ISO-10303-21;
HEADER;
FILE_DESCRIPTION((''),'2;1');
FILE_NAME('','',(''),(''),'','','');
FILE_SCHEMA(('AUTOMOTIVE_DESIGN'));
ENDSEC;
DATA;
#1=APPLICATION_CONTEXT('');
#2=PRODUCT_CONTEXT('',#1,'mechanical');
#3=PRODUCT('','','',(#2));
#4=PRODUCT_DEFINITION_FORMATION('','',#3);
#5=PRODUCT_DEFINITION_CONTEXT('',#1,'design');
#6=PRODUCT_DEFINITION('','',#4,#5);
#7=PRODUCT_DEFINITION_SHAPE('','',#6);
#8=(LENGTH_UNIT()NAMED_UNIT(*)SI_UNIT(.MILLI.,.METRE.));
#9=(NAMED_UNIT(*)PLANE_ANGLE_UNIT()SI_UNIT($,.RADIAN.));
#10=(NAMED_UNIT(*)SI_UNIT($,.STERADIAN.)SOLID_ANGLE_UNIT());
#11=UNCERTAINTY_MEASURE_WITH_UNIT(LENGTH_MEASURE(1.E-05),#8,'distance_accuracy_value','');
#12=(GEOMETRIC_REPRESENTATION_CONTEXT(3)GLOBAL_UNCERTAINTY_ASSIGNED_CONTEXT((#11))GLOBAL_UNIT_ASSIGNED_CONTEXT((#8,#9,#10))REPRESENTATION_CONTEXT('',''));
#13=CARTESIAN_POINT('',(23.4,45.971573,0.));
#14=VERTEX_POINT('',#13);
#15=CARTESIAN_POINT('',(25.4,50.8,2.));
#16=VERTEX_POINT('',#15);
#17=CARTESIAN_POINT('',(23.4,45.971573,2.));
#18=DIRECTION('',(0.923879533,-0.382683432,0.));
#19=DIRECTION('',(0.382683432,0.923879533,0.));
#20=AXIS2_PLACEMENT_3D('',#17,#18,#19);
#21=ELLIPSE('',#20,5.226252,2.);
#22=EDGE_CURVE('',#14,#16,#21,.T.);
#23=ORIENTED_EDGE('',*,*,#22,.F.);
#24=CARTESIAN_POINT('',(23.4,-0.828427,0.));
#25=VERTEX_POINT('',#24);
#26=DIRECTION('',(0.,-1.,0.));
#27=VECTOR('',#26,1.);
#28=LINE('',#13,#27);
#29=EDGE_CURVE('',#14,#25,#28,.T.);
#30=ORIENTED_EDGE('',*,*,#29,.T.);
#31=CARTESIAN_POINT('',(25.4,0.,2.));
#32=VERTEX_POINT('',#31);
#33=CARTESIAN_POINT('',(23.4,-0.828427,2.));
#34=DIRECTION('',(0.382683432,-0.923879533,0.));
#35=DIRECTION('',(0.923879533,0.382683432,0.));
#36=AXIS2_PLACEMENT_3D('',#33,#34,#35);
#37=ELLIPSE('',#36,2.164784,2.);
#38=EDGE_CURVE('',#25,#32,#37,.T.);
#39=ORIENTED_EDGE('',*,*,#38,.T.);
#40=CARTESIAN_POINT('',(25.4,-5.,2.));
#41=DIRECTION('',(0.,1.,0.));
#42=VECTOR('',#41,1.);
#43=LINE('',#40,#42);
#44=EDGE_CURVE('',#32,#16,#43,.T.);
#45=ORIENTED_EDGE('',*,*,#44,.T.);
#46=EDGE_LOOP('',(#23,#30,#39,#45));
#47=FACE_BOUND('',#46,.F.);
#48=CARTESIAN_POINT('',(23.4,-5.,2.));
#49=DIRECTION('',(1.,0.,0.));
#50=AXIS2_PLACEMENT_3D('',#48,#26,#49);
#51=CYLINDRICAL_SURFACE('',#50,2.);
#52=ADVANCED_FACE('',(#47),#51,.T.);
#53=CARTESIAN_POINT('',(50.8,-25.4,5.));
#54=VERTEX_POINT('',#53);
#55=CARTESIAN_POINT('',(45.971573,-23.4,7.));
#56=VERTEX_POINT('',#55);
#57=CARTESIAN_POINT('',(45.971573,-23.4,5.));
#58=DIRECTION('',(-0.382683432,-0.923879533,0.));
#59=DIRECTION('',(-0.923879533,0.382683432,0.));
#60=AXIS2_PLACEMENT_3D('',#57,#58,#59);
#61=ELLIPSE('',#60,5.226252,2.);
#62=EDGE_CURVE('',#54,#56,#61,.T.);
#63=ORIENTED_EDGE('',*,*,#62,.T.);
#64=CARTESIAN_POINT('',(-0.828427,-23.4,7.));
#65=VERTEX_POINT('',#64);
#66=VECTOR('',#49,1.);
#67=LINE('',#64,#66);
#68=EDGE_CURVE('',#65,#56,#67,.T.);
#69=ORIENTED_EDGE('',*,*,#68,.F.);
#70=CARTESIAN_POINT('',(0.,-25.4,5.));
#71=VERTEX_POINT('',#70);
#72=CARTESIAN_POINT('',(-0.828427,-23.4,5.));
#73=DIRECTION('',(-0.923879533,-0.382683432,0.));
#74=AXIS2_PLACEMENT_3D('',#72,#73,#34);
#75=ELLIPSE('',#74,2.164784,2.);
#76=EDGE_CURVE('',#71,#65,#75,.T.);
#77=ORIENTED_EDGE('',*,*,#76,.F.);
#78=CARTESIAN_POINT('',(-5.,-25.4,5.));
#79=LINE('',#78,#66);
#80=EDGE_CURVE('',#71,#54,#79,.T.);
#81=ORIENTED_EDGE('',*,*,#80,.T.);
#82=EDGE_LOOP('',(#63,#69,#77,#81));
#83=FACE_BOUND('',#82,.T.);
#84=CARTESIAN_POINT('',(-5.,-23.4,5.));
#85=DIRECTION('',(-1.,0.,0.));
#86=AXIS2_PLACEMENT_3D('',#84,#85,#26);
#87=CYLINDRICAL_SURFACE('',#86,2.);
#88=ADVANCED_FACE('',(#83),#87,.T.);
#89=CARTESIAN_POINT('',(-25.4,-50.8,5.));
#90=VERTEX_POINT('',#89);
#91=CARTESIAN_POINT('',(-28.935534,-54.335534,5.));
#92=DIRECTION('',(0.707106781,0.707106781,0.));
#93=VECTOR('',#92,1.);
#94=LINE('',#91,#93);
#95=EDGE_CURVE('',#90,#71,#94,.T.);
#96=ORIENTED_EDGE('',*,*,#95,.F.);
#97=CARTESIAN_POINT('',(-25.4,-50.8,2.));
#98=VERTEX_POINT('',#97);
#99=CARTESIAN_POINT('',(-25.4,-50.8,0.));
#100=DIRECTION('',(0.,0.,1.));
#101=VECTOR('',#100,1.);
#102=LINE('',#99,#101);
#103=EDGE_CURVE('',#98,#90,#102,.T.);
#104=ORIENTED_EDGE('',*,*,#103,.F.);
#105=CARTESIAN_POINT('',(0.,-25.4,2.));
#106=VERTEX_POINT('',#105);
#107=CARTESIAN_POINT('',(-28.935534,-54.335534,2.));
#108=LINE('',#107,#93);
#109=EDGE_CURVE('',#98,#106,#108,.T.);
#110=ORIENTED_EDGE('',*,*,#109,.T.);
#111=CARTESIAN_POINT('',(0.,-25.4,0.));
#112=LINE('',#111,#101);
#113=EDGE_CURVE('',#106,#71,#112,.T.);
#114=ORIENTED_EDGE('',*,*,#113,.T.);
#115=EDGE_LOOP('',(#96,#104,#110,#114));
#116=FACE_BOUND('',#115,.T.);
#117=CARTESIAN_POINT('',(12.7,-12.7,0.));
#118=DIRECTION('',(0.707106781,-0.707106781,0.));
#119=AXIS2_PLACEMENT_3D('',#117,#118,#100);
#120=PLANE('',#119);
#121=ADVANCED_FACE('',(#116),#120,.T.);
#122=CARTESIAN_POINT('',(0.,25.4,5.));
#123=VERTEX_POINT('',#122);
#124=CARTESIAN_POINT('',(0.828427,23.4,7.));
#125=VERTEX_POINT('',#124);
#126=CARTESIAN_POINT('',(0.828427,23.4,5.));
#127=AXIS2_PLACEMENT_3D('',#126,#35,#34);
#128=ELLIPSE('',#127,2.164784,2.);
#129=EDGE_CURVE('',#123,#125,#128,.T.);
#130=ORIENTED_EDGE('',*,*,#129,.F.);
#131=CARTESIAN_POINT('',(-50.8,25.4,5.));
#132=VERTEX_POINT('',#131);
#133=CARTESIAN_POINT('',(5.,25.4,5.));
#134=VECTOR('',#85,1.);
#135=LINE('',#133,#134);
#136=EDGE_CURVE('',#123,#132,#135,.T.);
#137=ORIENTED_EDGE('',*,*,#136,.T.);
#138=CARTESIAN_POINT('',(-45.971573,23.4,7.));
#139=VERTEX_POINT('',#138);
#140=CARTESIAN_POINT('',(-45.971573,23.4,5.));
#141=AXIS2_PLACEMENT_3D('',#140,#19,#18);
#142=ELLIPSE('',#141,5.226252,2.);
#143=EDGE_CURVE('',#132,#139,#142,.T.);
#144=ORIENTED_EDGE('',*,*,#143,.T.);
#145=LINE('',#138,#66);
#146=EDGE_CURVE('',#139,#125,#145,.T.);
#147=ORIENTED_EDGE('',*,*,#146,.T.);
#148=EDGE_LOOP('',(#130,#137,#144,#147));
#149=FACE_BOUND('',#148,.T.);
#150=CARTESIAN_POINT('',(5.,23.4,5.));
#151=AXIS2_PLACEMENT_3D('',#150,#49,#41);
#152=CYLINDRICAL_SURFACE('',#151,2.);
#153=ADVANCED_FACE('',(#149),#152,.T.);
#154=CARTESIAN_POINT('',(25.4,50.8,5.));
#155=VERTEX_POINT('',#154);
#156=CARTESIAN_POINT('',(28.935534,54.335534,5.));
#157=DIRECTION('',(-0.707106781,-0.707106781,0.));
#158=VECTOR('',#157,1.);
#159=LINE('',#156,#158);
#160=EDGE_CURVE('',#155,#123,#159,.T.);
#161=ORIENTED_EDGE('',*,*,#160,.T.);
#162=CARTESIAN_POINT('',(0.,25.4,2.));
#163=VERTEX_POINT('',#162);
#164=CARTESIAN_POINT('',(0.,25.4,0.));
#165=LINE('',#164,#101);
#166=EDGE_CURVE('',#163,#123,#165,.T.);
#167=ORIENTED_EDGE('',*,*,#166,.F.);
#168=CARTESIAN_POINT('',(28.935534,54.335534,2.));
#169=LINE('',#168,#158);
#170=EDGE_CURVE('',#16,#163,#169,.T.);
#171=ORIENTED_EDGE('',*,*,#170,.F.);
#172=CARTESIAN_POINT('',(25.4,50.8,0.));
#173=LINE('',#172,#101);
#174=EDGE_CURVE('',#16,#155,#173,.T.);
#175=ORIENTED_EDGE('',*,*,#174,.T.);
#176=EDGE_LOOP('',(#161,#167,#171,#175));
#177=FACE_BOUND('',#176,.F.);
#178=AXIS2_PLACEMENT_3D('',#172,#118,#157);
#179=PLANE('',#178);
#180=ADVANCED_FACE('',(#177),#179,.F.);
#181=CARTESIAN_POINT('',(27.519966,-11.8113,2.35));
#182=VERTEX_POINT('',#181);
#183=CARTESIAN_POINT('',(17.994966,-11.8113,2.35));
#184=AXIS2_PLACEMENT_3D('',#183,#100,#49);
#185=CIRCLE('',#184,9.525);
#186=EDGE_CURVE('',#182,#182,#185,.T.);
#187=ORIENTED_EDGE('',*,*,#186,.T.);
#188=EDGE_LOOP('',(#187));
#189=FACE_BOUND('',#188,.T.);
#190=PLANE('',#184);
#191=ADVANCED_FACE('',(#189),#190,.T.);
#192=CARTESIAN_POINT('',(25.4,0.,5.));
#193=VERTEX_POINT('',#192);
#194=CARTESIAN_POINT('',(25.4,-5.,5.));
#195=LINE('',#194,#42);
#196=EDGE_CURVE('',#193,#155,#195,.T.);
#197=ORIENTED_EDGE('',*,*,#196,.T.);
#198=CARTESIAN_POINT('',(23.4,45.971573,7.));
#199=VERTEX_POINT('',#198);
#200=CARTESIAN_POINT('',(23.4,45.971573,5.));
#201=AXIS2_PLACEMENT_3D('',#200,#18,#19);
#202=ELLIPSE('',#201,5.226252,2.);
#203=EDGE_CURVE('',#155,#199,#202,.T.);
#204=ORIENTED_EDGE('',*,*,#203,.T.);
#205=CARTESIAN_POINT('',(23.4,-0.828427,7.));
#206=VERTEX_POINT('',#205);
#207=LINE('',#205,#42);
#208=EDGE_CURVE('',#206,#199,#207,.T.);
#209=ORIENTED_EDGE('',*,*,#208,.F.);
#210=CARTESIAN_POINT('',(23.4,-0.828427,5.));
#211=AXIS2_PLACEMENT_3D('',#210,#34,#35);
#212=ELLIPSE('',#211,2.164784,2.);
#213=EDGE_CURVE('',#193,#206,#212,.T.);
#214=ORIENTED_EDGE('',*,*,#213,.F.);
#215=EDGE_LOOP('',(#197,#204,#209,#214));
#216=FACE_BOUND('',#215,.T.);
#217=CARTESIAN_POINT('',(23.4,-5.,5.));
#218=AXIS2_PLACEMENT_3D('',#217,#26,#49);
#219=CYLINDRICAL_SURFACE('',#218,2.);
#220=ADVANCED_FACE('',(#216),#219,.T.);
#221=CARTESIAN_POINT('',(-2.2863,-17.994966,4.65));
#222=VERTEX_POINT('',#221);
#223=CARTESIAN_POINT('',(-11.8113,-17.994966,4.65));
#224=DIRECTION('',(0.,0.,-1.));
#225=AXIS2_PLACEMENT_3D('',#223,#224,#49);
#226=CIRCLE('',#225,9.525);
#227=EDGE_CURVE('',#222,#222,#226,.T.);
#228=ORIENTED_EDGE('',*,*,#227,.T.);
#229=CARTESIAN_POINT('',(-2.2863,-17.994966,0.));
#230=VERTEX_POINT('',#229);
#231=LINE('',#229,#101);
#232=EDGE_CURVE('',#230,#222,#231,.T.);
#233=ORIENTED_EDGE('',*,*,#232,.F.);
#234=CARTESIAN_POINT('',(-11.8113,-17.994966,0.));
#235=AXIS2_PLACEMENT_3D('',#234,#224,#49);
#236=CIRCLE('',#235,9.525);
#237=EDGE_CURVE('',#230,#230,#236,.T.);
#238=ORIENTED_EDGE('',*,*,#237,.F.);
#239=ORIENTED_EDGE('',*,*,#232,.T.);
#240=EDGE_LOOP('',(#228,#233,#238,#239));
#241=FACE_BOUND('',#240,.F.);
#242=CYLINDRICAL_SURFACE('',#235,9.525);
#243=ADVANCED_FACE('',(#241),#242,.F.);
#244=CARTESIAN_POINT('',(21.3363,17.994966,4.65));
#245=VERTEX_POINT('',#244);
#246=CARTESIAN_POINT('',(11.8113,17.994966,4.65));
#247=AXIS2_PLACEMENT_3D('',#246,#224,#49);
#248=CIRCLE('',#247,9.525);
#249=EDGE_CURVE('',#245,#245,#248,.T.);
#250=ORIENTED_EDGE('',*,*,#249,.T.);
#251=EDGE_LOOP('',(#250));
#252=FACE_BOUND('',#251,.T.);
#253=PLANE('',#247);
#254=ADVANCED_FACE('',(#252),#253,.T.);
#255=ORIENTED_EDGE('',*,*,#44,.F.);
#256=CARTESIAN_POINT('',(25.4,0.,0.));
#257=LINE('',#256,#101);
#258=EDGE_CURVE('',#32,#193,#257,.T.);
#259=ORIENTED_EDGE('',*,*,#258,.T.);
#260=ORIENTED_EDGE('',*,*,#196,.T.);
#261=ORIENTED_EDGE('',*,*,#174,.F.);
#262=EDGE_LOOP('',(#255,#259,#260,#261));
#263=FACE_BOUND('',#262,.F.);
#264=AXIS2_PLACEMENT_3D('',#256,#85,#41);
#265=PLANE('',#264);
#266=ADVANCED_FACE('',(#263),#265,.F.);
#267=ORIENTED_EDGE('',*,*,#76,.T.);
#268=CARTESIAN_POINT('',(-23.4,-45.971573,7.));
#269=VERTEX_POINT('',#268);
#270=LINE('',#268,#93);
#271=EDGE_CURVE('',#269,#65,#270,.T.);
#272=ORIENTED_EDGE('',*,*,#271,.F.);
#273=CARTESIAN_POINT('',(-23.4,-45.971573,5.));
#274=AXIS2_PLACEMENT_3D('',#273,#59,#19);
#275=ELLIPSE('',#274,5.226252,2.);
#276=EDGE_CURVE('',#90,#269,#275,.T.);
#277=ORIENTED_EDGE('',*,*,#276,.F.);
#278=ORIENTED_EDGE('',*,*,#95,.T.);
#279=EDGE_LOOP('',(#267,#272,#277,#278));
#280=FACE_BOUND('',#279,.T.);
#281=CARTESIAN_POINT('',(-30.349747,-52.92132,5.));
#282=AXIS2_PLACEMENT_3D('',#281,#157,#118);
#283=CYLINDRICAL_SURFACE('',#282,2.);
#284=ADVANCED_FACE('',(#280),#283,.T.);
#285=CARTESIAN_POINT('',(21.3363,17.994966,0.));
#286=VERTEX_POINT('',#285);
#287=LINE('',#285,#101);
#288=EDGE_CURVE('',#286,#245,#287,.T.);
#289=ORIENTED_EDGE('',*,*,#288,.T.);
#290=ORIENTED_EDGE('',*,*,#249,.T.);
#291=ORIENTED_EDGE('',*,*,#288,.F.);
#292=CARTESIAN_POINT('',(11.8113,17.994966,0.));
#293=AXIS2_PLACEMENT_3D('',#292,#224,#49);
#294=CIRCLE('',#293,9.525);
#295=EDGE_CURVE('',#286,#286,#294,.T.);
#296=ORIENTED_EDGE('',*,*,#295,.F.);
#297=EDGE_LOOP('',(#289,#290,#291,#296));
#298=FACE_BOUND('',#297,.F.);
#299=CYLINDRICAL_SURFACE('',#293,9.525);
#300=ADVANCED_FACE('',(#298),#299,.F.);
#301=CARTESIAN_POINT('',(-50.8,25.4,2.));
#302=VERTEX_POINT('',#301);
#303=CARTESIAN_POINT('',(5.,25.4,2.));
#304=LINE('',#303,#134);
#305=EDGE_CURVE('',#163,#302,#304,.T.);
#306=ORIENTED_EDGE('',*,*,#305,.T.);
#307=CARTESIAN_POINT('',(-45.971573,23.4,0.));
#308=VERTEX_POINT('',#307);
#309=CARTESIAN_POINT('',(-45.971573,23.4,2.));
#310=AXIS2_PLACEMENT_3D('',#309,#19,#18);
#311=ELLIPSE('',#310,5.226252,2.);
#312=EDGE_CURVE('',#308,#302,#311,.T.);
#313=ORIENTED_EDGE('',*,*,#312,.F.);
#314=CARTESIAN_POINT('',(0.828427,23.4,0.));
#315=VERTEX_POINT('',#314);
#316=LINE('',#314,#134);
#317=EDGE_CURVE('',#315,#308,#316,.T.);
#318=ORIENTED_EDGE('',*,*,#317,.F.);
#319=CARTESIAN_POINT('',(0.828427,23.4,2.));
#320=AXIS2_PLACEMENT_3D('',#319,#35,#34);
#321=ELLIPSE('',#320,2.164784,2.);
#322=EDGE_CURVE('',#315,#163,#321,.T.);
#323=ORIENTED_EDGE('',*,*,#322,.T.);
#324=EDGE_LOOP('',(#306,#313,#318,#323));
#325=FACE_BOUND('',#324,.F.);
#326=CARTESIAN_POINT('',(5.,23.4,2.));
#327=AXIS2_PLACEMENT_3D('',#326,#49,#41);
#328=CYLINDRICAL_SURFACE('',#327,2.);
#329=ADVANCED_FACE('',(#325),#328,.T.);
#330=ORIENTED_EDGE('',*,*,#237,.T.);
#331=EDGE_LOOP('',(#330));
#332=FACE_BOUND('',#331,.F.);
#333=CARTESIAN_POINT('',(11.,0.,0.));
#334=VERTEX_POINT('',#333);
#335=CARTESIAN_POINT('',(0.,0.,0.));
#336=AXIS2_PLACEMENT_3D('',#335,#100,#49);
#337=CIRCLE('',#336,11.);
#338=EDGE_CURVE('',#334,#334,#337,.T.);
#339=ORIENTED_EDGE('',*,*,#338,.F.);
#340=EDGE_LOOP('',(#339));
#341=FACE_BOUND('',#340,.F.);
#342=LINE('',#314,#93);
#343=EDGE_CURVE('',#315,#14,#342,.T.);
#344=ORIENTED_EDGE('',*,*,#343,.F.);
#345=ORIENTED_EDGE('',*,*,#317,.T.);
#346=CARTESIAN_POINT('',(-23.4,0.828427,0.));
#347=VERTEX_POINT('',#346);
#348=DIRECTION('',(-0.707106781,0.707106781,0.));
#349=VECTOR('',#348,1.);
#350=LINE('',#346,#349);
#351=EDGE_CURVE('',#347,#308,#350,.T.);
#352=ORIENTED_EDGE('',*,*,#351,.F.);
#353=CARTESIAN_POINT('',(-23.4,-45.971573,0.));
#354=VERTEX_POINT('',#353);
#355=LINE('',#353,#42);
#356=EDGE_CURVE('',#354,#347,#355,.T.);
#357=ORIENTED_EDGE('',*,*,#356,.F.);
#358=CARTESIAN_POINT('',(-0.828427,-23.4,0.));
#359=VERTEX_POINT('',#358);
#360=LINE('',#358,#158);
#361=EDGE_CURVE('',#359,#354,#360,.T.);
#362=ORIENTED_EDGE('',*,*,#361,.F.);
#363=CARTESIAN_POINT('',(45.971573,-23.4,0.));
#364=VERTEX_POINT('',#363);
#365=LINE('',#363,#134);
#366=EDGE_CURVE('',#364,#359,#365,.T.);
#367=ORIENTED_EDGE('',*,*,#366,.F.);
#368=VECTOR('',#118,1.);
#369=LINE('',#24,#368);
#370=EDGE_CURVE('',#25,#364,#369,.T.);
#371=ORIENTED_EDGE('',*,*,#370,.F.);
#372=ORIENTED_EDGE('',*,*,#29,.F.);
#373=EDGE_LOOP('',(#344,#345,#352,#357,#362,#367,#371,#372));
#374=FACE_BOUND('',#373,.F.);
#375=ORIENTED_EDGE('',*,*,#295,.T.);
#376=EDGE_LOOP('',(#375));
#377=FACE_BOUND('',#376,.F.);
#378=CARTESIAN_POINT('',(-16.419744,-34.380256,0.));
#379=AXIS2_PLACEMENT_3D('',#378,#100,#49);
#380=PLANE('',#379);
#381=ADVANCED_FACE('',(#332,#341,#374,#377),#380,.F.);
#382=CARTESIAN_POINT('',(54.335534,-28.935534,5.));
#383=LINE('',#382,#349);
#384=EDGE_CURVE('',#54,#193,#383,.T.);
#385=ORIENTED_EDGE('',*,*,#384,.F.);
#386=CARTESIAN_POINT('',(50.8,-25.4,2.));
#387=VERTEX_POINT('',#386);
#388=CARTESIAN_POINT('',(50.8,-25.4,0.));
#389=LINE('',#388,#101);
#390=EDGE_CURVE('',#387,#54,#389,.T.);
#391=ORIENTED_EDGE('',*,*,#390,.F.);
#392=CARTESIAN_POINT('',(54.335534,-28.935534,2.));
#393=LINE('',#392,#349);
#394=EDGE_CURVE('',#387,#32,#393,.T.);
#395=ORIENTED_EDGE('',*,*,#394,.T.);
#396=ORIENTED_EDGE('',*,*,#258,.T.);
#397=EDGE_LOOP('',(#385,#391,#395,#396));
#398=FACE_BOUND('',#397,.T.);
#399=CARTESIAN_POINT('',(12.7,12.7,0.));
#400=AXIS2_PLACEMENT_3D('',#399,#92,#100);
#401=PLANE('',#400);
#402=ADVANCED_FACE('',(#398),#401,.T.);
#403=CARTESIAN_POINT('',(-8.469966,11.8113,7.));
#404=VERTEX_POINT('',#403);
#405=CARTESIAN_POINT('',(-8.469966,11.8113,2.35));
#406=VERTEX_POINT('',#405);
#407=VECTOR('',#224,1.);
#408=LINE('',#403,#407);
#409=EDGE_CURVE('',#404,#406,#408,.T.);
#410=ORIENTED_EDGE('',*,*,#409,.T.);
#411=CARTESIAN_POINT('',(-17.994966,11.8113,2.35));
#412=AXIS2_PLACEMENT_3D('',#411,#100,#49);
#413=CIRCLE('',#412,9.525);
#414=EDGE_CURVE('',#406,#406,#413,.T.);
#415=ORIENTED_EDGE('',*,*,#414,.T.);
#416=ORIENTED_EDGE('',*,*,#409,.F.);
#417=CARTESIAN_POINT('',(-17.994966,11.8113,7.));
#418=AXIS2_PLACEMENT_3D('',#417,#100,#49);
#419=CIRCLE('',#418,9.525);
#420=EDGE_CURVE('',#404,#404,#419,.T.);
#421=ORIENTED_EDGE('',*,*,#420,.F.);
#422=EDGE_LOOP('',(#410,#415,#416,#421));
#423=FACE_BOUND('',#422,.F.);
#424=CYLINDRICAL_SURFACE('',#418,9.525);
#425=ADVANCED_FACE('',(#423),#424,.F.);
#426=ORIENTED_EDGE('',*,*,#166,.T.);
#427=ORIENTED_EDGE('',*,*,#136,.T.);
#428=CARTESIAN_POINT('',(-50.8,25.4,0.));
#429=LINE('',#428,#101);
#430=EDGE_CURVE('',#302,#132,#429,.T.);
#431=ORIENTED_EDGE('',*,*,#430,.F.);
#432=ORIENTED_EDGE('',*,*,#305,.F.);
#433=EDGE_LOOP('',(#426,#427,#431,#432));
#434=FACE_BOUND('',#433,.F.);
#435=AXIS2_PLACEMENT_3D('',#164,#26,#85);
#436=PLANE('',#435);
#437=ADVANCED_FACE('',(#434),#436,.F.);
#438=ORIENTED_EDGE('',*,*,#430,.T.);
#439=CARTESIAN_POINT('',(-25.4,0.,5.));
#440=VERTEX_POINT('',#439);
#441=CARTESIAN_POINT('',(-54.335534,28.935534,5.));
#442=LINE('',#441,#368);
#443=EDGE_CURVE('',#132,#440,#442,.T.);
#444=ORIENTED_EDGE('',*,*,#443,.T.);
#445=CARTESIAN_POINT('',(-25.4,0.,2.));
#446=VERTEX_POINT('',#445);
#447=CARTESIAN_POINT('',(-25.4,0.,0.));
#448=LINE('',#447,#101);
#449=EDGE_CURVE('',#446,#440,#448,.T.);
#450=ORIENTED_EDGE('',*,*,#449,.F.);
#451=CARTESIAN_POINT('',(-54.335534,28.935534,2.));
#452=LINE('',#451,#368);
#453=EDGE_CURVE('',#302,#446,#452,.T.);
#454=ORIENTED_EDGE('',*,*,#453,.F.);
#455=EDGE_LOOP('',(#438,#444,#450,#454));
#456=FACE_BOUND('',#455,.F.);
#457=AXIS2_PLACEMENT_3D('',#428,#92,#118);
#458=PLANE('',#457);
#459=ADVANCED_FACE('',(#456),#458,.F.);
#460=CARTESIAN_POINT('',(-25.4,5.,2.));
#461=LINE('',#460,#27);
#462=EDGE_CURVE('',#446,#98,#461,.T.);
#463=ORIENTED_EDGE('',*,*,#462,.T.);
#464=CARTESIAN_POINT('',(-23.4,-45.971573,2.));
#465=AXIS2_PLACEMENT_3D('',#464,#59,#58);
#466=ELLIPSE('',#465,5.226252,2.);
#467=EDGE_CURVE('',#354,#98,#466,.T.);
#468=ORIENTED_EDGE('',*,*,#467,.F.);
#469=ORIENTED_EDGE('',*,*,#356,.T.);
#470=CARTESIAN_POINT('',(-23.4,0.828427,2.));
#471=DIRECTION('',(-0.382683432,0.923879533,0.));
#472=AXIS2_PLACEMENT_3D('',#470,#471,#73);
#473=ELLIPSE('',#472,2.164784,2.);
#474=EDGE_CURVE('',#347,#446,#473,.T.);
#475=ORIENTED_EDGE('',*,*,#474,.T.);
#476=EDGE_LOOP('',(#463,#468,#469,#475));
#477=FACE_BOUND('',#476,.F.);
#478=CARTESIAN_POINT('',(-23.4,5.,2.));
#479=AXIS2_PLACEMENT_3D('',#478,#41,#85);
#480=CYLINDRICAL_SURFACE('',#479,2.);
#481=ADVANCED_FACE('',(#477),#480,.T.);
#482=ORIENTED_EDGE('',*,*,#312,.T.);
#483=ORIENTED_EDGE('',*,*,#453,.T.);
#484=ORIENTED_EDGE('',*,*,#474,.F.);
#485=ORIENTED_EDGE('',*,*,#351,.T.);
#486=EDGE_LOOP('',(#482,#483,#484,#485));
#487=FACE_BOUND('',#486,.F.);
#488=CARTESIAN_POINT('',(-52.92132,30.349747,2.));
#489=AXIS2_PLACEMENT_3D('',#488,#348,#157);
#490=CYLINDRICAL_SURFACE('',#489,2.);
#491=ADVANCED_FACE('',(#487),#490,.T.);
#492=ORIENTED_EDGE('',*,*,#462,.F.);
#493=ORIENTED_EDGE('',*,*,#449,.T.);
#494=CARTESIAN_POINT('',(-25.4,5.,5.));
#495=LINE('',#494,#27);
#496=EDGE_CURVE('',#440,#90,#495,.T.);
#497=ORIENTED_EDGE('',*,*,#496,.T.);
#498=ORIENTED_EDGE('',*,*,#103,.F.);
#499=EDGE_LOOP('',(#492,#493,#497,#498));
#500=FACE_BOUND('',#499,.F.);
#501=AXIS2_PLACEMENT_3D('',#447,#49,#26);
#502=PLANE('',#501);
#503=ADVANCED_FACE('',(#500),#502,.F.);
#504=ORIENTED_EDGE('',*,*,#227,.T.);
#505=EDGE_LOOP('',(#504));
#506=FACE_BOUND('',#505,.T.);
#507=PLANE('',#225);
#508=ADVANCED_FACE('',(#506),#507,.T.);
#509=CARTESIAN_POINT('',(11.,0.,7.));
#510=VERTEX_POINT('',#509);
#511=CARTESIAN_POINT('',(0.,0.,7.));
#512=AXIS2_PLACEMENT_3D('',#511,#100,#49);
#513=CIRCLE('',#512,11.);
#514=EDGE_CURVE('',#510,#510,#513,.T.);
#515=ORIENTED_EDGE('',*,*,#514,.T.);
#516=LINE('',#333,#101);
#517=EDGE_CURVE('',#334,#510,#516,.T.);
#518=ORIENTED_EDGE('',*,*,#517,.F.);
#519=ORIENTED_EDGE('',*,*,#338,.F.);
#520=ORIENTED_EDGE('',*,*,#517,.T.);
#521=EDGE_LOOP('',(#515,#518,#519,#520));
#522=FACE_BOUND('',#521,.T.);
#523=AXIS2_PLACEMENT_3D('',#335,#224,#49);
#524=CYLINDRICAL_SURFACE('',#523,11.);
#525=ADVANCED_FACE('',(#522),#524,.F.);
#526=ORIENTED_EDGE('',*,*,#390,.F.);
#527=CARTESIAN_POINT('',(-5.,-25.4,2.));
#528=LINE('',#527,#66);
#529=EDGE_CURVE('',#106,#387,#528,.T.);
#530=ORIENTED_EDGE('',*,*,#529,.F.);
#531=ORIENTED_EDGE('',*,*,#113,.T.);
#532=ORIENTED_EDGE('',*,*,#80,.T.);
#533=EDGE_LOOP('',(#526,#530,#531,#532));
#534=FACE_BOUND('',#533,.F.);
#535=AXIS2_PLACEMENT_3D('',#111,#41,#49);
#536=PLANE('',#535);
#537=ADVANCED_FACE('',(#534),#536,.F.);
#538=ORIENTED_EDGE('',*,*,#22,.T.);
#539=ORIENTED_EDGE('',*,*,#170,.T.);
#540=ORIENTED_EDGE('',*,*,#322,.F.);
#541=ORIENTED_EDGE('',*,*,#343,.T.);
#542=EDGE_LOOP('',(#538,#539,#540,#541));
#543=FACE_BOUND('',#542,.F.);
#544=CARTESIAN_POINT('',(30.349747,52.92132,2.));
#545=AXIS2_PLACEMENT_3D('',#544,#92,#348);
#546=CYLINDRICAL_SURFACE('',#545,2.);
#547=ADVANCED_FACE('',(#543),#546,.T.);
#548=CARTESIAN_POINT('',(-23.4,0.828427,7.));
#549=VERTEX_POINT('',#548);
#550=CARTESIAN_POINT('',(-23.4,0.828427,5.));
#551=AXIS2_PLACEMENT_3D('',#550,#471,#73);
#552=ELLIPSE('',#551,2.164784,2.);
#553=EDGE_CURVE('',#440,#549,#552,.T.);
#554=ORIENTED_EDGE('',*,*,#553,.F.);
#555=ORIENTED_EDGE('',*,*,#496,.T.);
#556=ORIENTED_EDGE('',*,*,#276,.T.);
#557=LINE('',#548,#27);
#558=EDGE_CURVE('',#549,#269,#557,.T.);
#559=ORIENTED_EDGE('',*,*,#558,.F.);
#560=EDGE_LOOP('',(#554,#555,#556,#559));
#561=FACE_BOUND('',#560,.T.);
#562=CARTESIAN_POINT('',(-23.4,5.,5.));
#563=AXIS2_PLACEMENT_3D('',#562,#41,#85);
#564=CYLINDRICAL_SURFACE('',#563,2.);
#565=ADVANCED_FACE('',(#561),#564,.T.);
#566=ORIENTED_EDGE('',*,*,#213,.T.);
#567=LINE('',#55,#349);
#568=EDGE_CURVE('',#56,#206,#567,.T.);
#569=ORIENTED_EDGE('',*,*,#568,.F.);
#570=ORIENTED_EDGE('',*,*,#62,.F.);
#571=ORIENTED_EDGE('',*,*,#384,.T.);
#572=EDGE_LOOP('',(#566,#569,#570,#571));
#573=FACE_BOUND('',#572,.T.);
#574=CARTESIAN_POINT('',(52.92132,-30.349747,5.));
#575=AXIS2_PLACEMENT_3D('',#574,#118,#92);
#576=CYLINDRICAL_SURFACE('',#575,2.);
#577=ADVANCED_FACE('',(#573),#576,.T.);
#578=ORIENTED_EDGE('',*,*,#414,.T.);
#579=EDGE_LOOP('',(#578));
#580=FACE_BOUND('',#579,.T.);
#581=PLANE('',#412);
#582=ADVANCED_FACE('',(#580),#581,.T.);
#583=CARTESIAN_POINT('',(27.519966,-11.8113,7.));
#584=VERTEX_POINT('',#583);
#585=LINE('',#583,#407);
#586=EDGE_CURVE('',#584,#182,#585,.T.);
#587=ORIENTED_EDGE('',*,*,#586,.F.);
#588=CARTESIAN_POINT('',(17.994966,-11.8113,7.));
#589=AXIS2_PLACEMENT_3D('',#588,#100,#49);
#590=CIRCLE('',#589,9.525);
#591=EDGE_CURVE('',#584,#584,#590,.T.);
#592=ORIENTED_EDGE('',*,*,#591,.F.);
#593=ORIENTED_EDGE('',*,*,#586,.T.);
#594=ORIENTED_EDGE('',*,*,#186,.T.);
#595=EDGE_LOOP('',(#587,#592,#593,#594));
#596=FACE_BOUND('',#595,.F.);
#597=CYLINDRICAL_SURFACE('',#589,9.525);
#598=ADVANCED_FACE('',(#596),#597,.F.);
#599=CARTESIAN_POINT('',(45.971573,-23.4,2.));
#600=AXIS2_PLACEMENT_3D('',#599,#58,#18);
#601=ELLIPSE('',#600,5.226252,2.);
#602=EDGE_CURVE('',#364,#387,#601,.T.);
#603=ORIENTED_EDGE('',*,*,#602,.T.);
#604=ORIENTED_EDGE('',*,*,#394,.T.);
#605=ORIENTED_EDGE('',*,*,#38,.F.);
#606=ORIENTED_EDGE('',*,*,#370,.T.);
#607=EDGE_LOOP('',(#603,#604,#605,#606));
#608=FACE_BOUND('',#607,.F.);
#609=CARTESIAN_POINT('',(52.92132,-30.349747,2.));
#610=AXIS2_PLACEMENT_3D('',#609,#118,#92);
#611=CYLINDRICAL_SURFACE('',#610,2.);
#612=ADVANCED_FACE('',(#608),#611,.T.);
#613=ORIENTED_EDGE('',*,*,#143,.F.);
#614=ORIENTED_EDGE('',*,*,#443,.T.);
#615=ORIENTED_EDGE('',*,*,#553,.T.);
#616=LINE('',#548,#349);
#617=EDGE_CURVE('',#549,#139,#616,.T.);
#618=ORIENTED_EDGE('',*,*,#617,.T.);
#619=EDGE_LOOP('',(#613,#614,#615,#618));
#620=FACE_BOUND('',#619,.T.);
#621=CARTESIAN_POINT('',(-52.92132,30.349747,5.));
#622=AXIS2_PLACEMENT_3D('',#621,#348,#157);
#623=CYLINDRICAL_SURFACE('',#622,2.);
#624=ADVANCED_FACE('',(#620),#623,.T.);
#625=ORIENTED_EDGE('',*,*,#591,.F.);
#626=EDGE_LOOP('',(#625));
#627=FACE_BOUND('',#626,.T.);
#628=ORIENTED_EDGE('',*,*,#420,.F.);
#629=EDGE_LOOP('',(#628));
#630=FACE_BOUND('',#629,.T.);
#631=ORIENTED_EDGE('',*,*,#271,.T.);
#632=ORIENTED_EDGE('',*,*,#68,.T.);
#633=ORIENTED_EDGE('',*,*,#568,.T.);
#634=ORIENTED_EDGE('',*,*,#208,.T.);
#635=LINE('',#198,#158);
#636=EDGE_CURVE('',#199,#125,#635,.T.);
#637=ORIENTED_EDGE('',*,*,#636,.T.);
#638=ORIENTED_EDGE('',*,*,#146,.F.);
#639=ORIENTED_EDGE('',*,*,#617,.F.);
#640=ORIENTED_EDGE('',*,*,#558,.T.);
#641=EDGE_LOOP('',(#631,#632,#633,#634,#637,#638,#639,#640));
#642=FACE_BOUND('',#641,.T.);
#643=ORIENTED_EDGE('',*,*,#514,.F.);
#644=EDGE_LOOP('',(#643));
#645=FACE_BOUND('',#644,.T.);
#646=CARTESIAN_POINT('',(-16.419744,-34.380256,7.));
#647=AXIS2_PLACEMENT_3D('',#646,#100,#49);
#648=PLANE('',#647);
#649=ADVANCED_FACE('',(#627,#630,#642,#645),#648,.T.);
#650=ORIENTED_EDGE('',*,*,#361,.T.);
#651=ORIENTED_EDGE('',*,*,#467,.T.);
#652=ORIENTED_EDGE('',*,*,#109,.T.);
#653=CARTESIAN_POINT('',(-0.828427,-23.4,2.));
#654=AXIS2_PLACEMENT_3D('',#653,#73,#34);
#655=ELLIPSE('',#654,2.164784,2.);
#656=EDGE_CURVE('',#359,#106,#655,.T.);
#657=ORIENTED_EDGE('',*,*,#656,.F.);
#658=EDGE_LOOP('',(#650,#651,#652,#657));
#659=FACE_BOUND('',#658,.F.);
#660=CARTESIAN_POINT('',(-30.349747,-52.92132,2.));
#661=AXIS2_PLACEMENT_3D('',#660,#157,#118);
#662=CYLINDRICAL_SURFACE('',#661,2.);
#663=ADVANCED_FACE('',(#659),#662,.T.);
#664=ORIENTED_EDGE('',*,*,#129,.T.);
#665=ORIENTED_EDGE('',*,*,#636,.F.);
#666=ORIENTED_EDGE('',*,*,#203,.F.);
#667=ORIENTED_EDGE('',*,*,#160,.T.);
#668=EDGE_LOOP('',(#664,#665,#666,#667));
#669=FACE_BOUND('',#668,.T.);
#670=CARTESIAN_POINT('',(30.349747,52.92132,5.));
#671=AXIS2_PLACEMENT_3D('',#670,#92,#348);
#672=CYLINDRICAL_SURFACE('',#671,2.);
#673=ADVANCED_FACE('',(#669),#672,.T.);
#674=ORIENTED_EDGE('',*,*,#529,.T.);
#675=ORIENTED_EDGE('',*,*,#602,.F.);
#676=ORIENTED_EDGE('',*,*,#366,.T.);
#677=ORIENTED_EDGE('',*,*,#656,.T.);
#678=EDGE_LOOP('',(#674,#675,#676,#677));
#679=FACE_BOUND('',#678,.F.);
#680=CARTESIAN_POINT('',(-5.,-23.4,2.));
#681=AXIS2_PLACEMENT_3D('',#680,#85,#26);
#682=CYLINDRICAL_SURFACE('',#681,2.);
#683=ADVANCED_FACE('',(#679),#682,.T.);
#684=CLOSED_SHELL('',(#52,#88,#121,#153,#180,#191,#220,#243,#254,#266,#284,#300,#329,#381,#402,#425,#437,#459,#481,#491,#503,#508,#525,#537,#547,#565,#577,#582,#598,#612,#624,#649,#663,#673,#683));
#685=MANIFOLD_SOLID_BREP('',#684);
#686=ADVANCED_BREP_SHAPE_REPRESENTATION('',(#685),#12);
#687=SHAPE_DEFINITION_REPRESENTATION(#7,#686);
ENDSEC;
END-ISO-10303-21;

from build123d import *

# Parameters (mm, degrees)
F0_R          = 11
F1_DEPTH      = 7
F2_T4_DEPTH   = 60.8
F2_T9_DEPTH   = 45.9210244843
F2_T14_DEPTH  = 45.9210244843
F2_T19_DEPTH  = 60.8
F2_T24_DEPTH  = 45.9210244843
F2_T29_DEPTH  = 60.8
F2_T34_DEPTH  = 45.9210244843
F2_T39_DEPTH  = 60.8
F2_T44_DEPTH  = 60.8
F2_T49_DEPTH  = 45.9210244843
F2_T54_DEPTH  = 60.8
F2_T59_DEPTH  = 45.9210244843
F2_T64_DEPTH  = 60.8
F2_T69_DEPTH  = 45.9210244843
F2_T74_DEPTH  = 60.8
F2_T79_DEPTH  = 45.9210244843
F2_T85_DEPTH  = 60.8
F2_T89_DEPTH  = 45.9210244843
F2_T96_DEPTH  = 45.9210244843
F2_T100_DEPTH = 60.8
F2_T107_DEPTH = 45.9210244843
F2_T111_DEPTH = 60.8
F2_T118_DEPTH = 45.9210244843
F2_T122_DEPTH = 60.8
F2_T129_DEPTH = 60.8
F2_T133_DEPTH = 45.9210244843
F2_T140_DEPTH = 45.9210244843
F2_T144_DEPTH = 60.8
F2_T151_DEPTH = 45.9210244843
F2_T155_DEPTH = 60.8
F2_T162_DEPTH = 45.9210244843
F2_T166_DEPTH = 60.8
F3_R          = 9.525
F4_DEPTH      = 4.65
F5_R          = 9.525
F6_DEPTH      = 4.65
F7_R          = 9.525
F8_DEPTH      = 4.65
F9_R          = 9.525
F10_DEPTH     = 4.65


# Not quite as in the source:
# - a fillet or chamfer that OpenCascade refuses, or shapes differently, is made with other operations: its cross-section is extruded or revolved along the edge and cut away or added


with BuildPart() as f1:
    # F0 (on Top) → F1 (new body)
    with BuildSketch(Plane.XY):
        Polygon((-25.4, -50.8), (0, -25.4), (-25.4, -25.4), align=None)
        Polygon((25.4, 0), (25.4, 25.4), (0, 25.4), (-25.4, 25.4), (-25.4, 0), (-25.4, -25.4), (0, -25.4), (25.4, -25.4), align=None)
        Circle(F0_R, mode=Mode.SUBTRACT)
        Polygon((0, 25.4), (25.4, 25.4), (25.4, 50.8), align=None)
        Polygon((50.8, -25.4), (25.4, 0), (25.4, -25.4), align=None)
        Polygon((-25.4, 0), (-25.4, 25.4), (-50.8, 25.4), align=None)
    extrude(amount=F1_DEPTH)

    # F2: fillet of radius 2 on 20 edges, made by hand


with BuildPart() as f2_tool2:
    # F2_s3 → F2_t4 (new body)
    with BuildSketch(Plane.YZ.offset(5)):
        with BuildLine():
            ThreePointArc((25.4, 5), (24.8142135624, 6.4142135624), (23.4, 7))
            Line((23.4, 7), (25.4, 7))
            Line((25.4, 7), (25.4, 5))
        make_face()
    extrude(amount=-F2_T4_DEPTH)

    split(bisect_by=Plane(origin=(-12.7, 12.7, 0), x_dir=(0, 0, 1), z_dir=(-0.7071067812, 0.7071067812, 0)), keep=Keep.TOP)


with BuildPart() as f1_1:
    add(f1.part)

    # F2_t1: cut F2_tool2
    add(f2_tool2.part, mode=Mode.SUBTRACT)


with BuildPart() as f2_tool7:
    # F2_s8 → F2_t9 (new body)
    with BuildSketch(Plane(origin=(41.6355339059, 41.6355339059, 0), x_dir=(0, 0, 1), z_dir=(-0.7071067812, -0.7071067812, 0))):
        with BuildLine():
            ThreePointArc((5, 17.9605122421), (6.4142135624, 17.3747258045), (7, 15.9605122421))
            Line((7, 15.9605122421), (7, 17.9605122421))
            Line((7, 17.9605122421), (5, 17.9605122421))
        make_face()
    extrude(amount=F2_T9_DEPTH)

    split(bisect_by=Plane.XZ.offset(-25.4), keep=Keep.BOTTOM)


with BuildPart() as f1_2:
    add(f1_1.part)

    # F2_t6: cut F2_tool7
    add(f2_tool7.part, mode=Mode.SUBTRACT)


with BuildPart() as f2_tool12:
    # F2_s13 → F2_t14 (new body)
    with BuildSketch(Plane(origin=(-41.6355339059, 41.6355339059, 0), x_dir=(0, 0, 1), z_dir=(0.7071067812, -0.7071067812, 0))):
        with BuildLine():
            ThreePointArc((5, 17.9605122421), (6.4142135624, 17.3747258045), (7, 15.9605122421))
            Line((7, 15.9605122421), (7, 17.9605122421))
            Line((7, 17.9605122421), (5, 17.9605122421))
        make_face()
    extrude(amount=F2_T14_DEPTH)

    split(bisect_by=Plane.YZ.offset(-25.4), keep=Keep.BOTTOM)


with BuildPart() as f1_3:
    add(f1_2.part)

    # F2_t11: cut F2_tool12
    add(f2_tool12.part, mode=Mode.SUBTRACT)


with BuildPart() as f2_tool17:
    # F2_s18 → F2_t19 (new body)
    with BuildSketch(Plane.XZ.offset(-5)):
        with BuildLine():
            ThreePointArc((-25.4, 5), (-24.8142135624, 6.4142135624), (-23.4, 7))
            Line((-23.4, 7), (-25.4, 7))
            Line((-25.4, 7), (-25.4, 5))
        make_face()
    extrude(amount=F2_T19_DEPTH)

    split(bisect_by=Plane(origin=(-12.7, -12.7, 0), x_dir=(0, 0, 1), z_dir=(-0.7071067812, -0.7071067812, 0)), keep=Keep.TOP)


with BuildPart() as f1_4:
    add(f1_3.part)

    # F2_t16: cut F2_tool17
    add(f2_tool17.part, mode=Mode.SUBTRACT)


with BuildPart() as f2_tool22:
    # F2_s23 → F2_t24 (new body)
    with BuildSketch(Plane(origin=(-41.6355339059, -41.6355339059, 0), x_dir=(0, 0, 1), z_dir=(0.7071067812, 0.7071067812, 0))):
        with BuildLine():
            ThreePointArc((5, 17.9605122421), (6.4142135624, 17.3747258045), (7, 15.9605122421))
            Line((7, 15.9605122421), (7, 17.9605122421))
            Line((7, 17.9605122421), (5, 17.9605122421))
        make_face()
    extrude(amount=F2_T24_DEPTH)

    split(bisect_by=Plane.XZ.offset(25.4), keep=Keep.TOP)


with BuildPart() as f1_5:
    add(f1_4.part)

    # F2_t21: cut F2_tool22
    add(f2_tool22.part, mode=Mode.SUBTRACT)


with BuildPart() as f2_tool27:
    # F2_s28 → F2_t29 (new body)
    with BuildSketch(Plane.YZ.offset(-5)):
        with BuildLine():
            ThreePointArc((-25.4, 5), (-24.8142135624, 6.4142135624), (-23.4, 7))
            Line((-23.4, 7), (-25.4, 7))
            Line((-25.4, 7), (-25.4, 5))
        make_face()
    extrude(amount=F2_T29_DEPTH)

    split(bisect_by=Plane(origin=(12.7, -12.7, 0), x_dir=(0, 0, 1), z_dir=(0.7071067812, -0.7071067812, 0)), keep=Keep.TOP)


with BuildPart() as f1_6:
    add(f1_5.part)

    # F2_t26: cut F2_tool27
    add(f2_tool27.part, mode=Mode.SUBTRACT)


with BuildPart() as f2_tool32:
    # F2_s33 → F2_t34 (new body)
    with BuildSketch(Plane(origin=(41.6355339059, -41.6355339059, 0), x_dir=(0, 0, 1), z_dir=(-0.7071067812, 0.7071067812, 0))):
        with BuildLine():
            ThreePointArc((5, 17.9605122421), (6.4142135624, 17.3747258045), (7, 15.9605122421))
            Line((7, 15.9605122421), (7, 17.9605122421))
            Line((7, 17.9605122421), (5, 17.9605122421))
        make_face()
    extrude(amount=F2_T34_DEPTH)

    split(bisect_by=Plane.YZ.offset(25.4), keep=Keep.TOP)


with BuildPart() as f1_7:
    add(f1_6.part)

    # F2_t31: cut F2_tool32
    add(f2_tool32.part, mode=Mode.SUBTRACT)


with BuildPart() as f2_tool37:
    # F2_s38 → F2_t39 (new body)
    with BuildSketch(Plane.XZ.offset(5)):
        with BuildLine():
            ThreePointArc((25.4, 5), (24.8142135624, 6.4142135624), (23.4, 7))
            Line((23.4, 7), (25.4, 7))
            Line((25.4, 7), (25.4, 5))
        make_face()
    extrude(amount=-F2_T39_DEPTH)

    split(bisect_by=Plane(origin=(12.7, 12.7, 0), x_dir=(0, 0, 1), z_dir=(0.7071067812, 0.7071067812, 0)), keep=Keep.TOP)


with BuildPart() as f1_8:
    add(f1_7.part)

    # F2_t36: cut F2_tool37
    add(f2_tool37.part, mode=Mode.SUBTRACT)


with BuildPart() as f2_tool42:
    # F2_s43 → F2_t44 (new body)
    with BuildSketch(Plane.YZ.offset(5)):
        with BuildLine():
            ThreePointArc((25.4, 2), (24.8142135624, 0.5857864376), (23.4, 0))
            Line((23.4, 0), (25.4, 0))
            Line((25.4, 0), (25.4, 2))
        make_face()
    extrude(amount=-F2_T44_DEPTH)

    split(bisect_by=Plane(origin=(-12.7, 12.7, 0), x_dir=(0, 0, 1), z_dir=(-0.7071067812, 0.7071067812, 0)), keep=Keep.TOP)


with BuildPart() as f1_9:
    add(f1_8.part)

    # F2_t41: cut F2_tool42
    add(f2_tool42.part, mode=Mode.SUBTRACT)


with BuildPart() as f2_tool47:
    # F2_s48 → F2_t49 (new body)
    with BuildSketch(Plane(origin=(41.6355339059, 41.6355339059, 0), x_dir=(0, 0, 1), z_dir=(-0.7071067812, -0.7071067812, 0))):
        with BuildLine():
            ThreePointArc((2, 17.9605122421), (0.5857864376, 17.3747258045), (0, 15.9605122421))
            Line((0, 15.9605122421), (0, 17.9605122421))
            Line((0, 17.9605122421), (2, 17.9605122421))
        make_face()
    extrude(amount=F2_T49_DEPTH)

    split(bisect_by=Plane.XZ.offset(-25.4), keep=Keep.BOTTOM)


with BuildPart() as f1_10:
    add(f1_9.part)

    # F2_t46: cut F2_tool47
    add(f2_tool47.part, mode=Mode.SUBTRACT)


with BuildPart() as f2_tool52:
    # F2_s53 → F2_t54 (new body)
    with BuildSketch(Plane.XZ.offset(5)):
        with BuildLine():
            ThreePointArc((25.4, 2), (24.8142135624, 0.5857864376), (23.4, 0))
            Line((23.4, 0), (25.4, 0))
            Line((25.4, 0), (25.4, 2))
        make_face()
    extrude(amount=-F2_T54_DEPTH)

    split(bisect_by=Plane(origin=(12.7, 12.7, 0), x_dir=(0, 0, 1), z_dir=(0.7071067812, 0.7071067812, 0)), keep=Keep.TOP)


with BuildPart() as f1_11:
    add(f1_10.part)

    # F2_t51: cut F2_tool52
    add(f2_tool52.part, mode=Mode.SUBTRACT)


with BuildPart() as f2_tool57:
    # F2_s58 → F2_t59 (new body)
    with BuildSketch(Plane(origin=(41.6355339059, -41.6355339059, 0), x_dir=(0, 0, 1), z_dir=(-0.7071067812, 0.7071067812, 0))):
        with BuildLine():
            ThreePointArc((2, 17.9605122421), (0.5857864376, 17.3747258045), (0, 15.9605122421))
            Line((0, 15.9605122421), (0, 17.9605122421))
            Line((0, 17.9605122421), (2, 17.9605122421))
        make_face()
    extrude(amount=F2_T59_DEPTH)

    split(bisect_by=Plane.YZ.offset(25.4), keep=Keep.TOP)


with BuildPart() as f1_12:
    add(f1_11.part)

    # F2_t56: cut F2_tool57
    add(f2_tool57.part, mode=Mode.SUBTRACT)


with BuildPart() as f2_tool62:
    # F2_s63 → F2_t64 (new body)
    with BuildSketch(Plane.YZ.offset(-5)):
        with BuildLine():
            ThreePointArc((-25.4, 2), (-24.8142135624, 0.5857864376), (-23.4, 0))
            Line((-23.4, 0), (-25.4, 0))
            Line((-25.4, 0), (-25.4, 2))
        make_face()
    extrude(amount=F2_T64_DEPTH)

    split(bisect_by=Plane(origin=(12.7, -12.7, 0), x_dir=(0, 0, 1), z_dir=(0.7071067812, -0.7071067812, 0)), keep=Keep.TOP)


with BuildPart() as f1_13:
    add(f1_12.part)

    # F2_t61: cut F2_tool62
    add(f2_tool62.part, mode=Mode.SUBTRACT)


with BuildPart() as f2_tool67:
    # F2_s68 → F2_t69 (new body)
    with BuildSketch(Plane(origin=(-41.6355339059, -41.6355339059, 0), x_dir=(0, 0, 1), z_dir=(0.7071067812, 0.7071067812, 0))):
        with BuildLine():
            ThreePointArc((2, 17.9605122421), (0.5857864376, 17.3747258045), (0, 15.9605122421))
            Line((0, 15.9605122421), (0, 17.9605122421))
            Line((0, 17.9605122421), (2, 17.9605122421))
        make_face()
    extrude(amount=F2_T69_DEPTH)

    split(bisect_by=Plane.XZ.offset(25.4), keep=Keep.TOP)


with BuildPart() as f1_14:
    add(f1_13.part)

    # F2_t66: cut F2_tool67
    add(f2_tool67.part, mode=Mode.SUBTRACT)


with BuildPart() as f2_tool72:
    # F2_s73 → F2_t74 (new body)
    with BuildSketch(Plane.XZ.offset(-5)):
        with BuildLine():
            ThreePointArc((-25.4, 2), (-24.8142135624, 0.5857864376), (-23.4, 0))
            Line((-23.4, 0), (-25.4, 0))
            Line((-25.4, 0), (-25.4, 2))
        make_face()
    extrude(amount=F2_T74_DEPTH)

    split(bisect_by=Plane(origin=(-12.7, -12.7, 0), x_dir=(0, 0, 1), z_dir=(-0.7071067812, -0.7071067812, 0)), keep=Keep.TOP)


with BuildPart() as f1_15:
    add(f1_14.part)

    # F2_t71: cut F2_tool72
    add(f2_tool72.part, mode=Mode.SUBTRACT)


with BuildPart() as f2_tool77:
    # F2_s78 → F2_t79 (new body)
    with BuildSketch(Plane(origin=(-41.6355339059, 41.6355339059, 0), x_dir=(0, 0, 1), z_dir=(0.7071067812, -0.7071067812, 0))):
        with BuildLine():
            ThreePointArc((2, 17.9605122421), (0.5857864376, 17.3747258045), (0, 15.9605122421))
            Line((0, 15.9605122421), (0, 17.9605122421))
            Line((0, 17.9605122421), (2, 17.9605122421))
        make_face()
    extrude(amount=F2_T79_DEPTH)

    split(bisect_by=Plane.YZ.offset(-25.4), keep=Keep.BOTTOM)


with BuildPart() as f1_16:
    add(f1_15.part)

    # F2_t76: cut F2_tool77
    add(f2_tool77.part, mode=Mode.SUBTRACT)


with BuildPart() as f2_tool83:
    # F2_s84 → F2_t85 (new body)
    with BuildSketch(Plane.YZ.offset(5)):
        with BuildLine():
            ThreePointArc((25.4, 5), (24.8142135624, 6.4142135624), (23.4, 7))
            Line((23.4, 7), (25.4, 7))
            Line((25.4, 7), (25.4, 5))
        make_face()
    extrude(amount=-F2_T85_DEPTH)

    split(bisect_by=Plane(origin=(-12.7, 12.7, 0), x_dir=(0, 0, 1), z_dir=(0.7071067812, -0.7071067812, 0)), keep=Keep.TOP)


with BuildPart() as f2_tool87:
    # F2_s88 → F2_t89 (new body)
    with BuildSketch(Plane(origin=(41.6355339059, 41.6355339059, 0), x_dir=(0, 0, 1), z_dir=(-0.7071067812, -0.7071067812, 0))):
        with BuildLine():
            ThreePointArc((5, 17.9605122421), (6.4142135624, 17.3747258045), (7, 15.9605122421))
            Line((7, 15.9605122421), (7, 17.9605122421))
            Line((7, 17.9605122421), (5, 17.9605122421))
        make_face()
    extrude(amount=F2_T89_DEPTH)

    split(bisect_by=Plane.XZ.offset(-25.4), keep=Keep.TOP)


with BuildPart() as f2_tool83_1:
    add(f2_tool83.part)

    # F2_t91: intersect F2_tool87
    add(f2_tool87.part, mode=Mode.INTERSECT)


with BuildPart() as f1_17:
    add(f1_16.part)

    # F2_t81: cut F2_tool83
    add(f2_tool83_1.part, mode=Mode.SUBTRACT)


with BuildPart() as f2_tool94:
    # F2_s95 → F2_t96 (new body)
    with BuildSketch(Plane(origin=(-41.6355339059, 41.6355339059, 0), x_dir=(0, 0, 1), z_dir=(0.7071067812, -0.7071067812, 0))):
        with BuildLine():
            ThreePointArc((5, 17.9605122421), (6.4142135624, 17.3747258045), (7, 15.9605122421))
            Line((7, 15.9605122421), (7, 17.9605122421))
            Line((7, 17.9605122421), (5, 17.9605122421))
        make_face()
    extrude(amount=F2_T96_DEPTH)

    split(bisect_by=Plane.YZ.offset(-25.4), keep=Keep.TOP)


with BuildPart() as f2_tool98:
    # F2_s99 → F2_t100 (new body)
    with BuildSketch(Plane.XZ.offset(-5)):
        with BuildLine():
            ThreePointArc((-25.4, 5), (-24.8142135624, 6.4142135624), (-23.4, 7))
            Line((-23.4, 7), (-25.4, 7))
            Line((-25.4, 7), (-25.4, 5))
        make_face()
    extrude(amount=F2_T100_DEPTH)

    split(bisect_by=Plane(origin=(-12.7, -12.7, 0), x_dir=(0, 0, 1), z_dir=(0.7071067812, 0.7071067812, 0)), keep=Keep.TOP)


with BuildPart() as f2_tool94_1:
    add(f2_tool94.part)

    # F2_t102: intersect F2_tool98
    add(f2_tool98.part, mode=Mode.INTERSECT)


with BuildPart() as f1_18:
    add(f1_17.part)

    # F2_t92: cut F2_tool94
    add(f2_tool94_1.part, mode=Mode.SUBTRACT)


with BuildPart() as f2_tool105:
    # F2_s106 → F2_t107 (new body)
    with BuildSketch(Plane(origin=(-41.6355339059, -41.6355339059, 0), x_dir=(0, 0, 1), z_dir=(0.7071067812, 0.7071067812, 0))):
        with BuildLine():
            ThreePointArc((5, 17.9605122421), (6.4142135624, 17.3747258045), (7, 15.9605122421))
            Line((7, 15.9605122421), (7, 17.9605122421))
            Line((7, 17.9605122421), (5, 17.9605122421))
        make_face()
    extrude(amount=F2_T107_DEPTH)

    split(bisect_by=Plane.XZ.offset(25.4), keep=Keep.BOTTOM)


with BuildPart() as f2_tool109:
    # F2_s110 → F2_t111 (new body)
    with BuildSketch(Plane.YZ.offset(-5)):
        with BuildLine():
            ThreePointArc((-25.4, 5), (-24.8142135624, 6.4142135624), (-23.4, 7))
            Line((-23.4, 7), (-25.4, 7))
            Line((-25.4, 7), (-25.4, 5))
        make_face()
    extrude(amount=F2_T111_DEPTH)

    split(bisect_by=Plane(origin=(12.7, -12.7, 0), x_dir=(0, 0, 1), z_dir=(-0.7071067812, 0.7071067812, 0)), keep=Keep.TOP)


with BuildPart() as f2_tool105_1:
    add(f2_tool105.part)

    # F2_t113: intersect F2_tool109
    add(f2_tool109.part, mode=Mode.INTERSECT)


with BuildPart() as f1_19:
    add(f1_18.part)

    # F2_t103: cut F2_tool105
    add(f2_tool105_1.part, mode=Mode.SUBTRACT)


with BuildPart() as f2_tool116:
    # F2_s117 → F2_t118 (new body)
    with BuildSketch(Plane(origin=(41.6355339059, -41.6355339059, 0), x_dir=(0, 0, 1), z_dir=(-0.7071067812, 0.7071067812, 0))):
        with BuildLine():
            ThreePointArc((5, 17.9605122421), (6.4142135624, 17.3747258045), (7, 15.9605122421))
            Line((7, 15.9605122421), (7, 17.9605122421))
            Line((7, 17.9605122421), (5, 17.9605122421))
        make_face()
    extrude(amount=F2_T118_DEPTH)

    split(bisect_by=Plane.YZ.offset(25.4), keep=Keep.BOTTOM)


with BuildPart() as f2_tool120:
    # F2_s121 → F2_t122 (new body)
    with BuildSketch(Plane.XZ.offset(5)):
        with BuildLine():
            ThreePointArc((25.4, 5), (24.8142135624, 6.4142135624), (23.4, 7))
            Line((23.4, 7), (25.4, 7))
            Line((25.4, 7), (25.4, 5))
        make_face()
    extrude(amount=-F2_T122_DEPTH)

    split(bisect_by=Plane(origin=(12.7, 12.7, 0), x_dir=(0, 0, 1), z_dir=(-0.7071067812, -0.7071067812, 0)), keep=Keep.TOP)


with BuildPart() as f2_tool116_1:
    add(f2_tool116.part)

    # F2_t124: intersect F2_tool120
    add(f2_tool120.part, mode=Mode.INTERSECT)


with BuildPart() as f1_20:
    add(f1_19.part)

    # F2_t114: cut F2_tool116
    add(f2_tool116_1.part, mode=Mode.SUBTRACT)


with BuildPart() as f2_tool127:
    # F2_s128 → F2_t129 (new body)
    with BuildSketch(Plane.YZ.offset(5)):
        with BuildLine():
            ThreePointArc((25.4, 2), (24.8142135624, 0.5857864376), (23.4, 0))
            Line((23.4, 0), (25.4, 0))
            Line((25.4, 0), (25.4, 2))
        make_face()
    extrude(amount=-F2_T129_DEPTH)

    split(bisect_by=Plane(origin=(-12.7, 12.7, 0), x_dir=(0, 0, 1), z_dir=(0.7071067812, -0.7071067812, 0)), keep=Keep.TOP)


with BuildPart() as f2_tool131:
    # F2_s132 → F2_t133 (new body)
    with BuildSketch(Plane(origin=(41.6355339059, 41.6355339059, 0), x_dir=(0, 0, 1), z_dir=(-0.7071067812, -0.7071067812, 0))):
        with BuildLine():
            ThreePointArc((2, 17.9605122421), (0.5857864376, 17.3747258045), (0, 15.9605122421))
            Line((0, 15.9605122421), (0, 17.9605122421))
            Line((0, 17.9605122421), (2, 17.9605122421))
        make_face()
    extrude(amount=F2_T133_DEPTH)

    split(bisect_by=Plane.XZ.offset(-25.4), keep=Keep.TOP)


with BuildPart() as f2_tool127_1:
    add(f2_tool127.part)

    # F2_t135: intersect F2_tool131
    add(f2_tool131.part, mode=Mode.INTERSECT)


with BuildPart() as f1_21:
    add(f1_20.part)

    # F2_t125: cut F2_tool127
    add(f2_tool127_1.part, mode=Mode.SUBTRACT)


with BuildPart() as f2_tool138:
    # F2_s139 → F2_t140 (new body)
    with BuildSketch(Plane(origin=(41.6355339059, -41.6355339059, 0), x_dir=(0, 0, 1), z_dir=(-0.7071067812, 0.7071067812, 0))):
        with BuildLine():
            ThreePointArc((2, 17.9605122421), (0.5857864376, 17.3747258045), (0, 15.9605122421))
            Line((0, 15.9605122421), (0, 17.9605122421))
            Line((0, 17.9605122421), (2, 17.9605122421))
        make_face()
    extrude(amount=F2_T140_DEPTH)

    split(bisect_by=Plane.YZ.offset(25.4), keep=Keep.BOTTOM)


with BuildPart() as f2_tool142:
    # F2_s143 → F2_t144 (new body)
    with BuildSketch(Plane.XZ.offset(5)):
        with BuildLine():
            ThreePointArc((25.4, 2), (24.8142135624, 0.5857864376), (23.4, 0))
            Line((23.4, 0), (25.4, 0))
            Line((25.4, 0), (25.4, 2))
        make_face()
    extrude(amount=-F2_T144_DEPTH)

    split(bisect_by=Plane(origin=(12.7, 12.7, 0), x_dir=(0, 0, 1), z_dir=(-0.7071067812, -0.7071067812, 0)), keep=Keep.TOP)


with BuildPart() as f2_tool138_1:
    add(f2_tool138.part)

    # F2_t146: intersect F2_tool142
    add(f2_tool142.part, mode=Mode.INTERSECT)


with BuildPart() as f1_22:
    add(f1_21.part)

    # F2_t136: cut F2_tool138
    add(f2_tool138_1.part, mode=Mode.SUBTRACT)


with BuildPart() as f2_tool149:
    # F2_s150 → F2_t151 (new body)
    with BuildSketch(Plane(origin=(-41.6355339059, -41.6355339059, 0), x_dir=(0, 0, 1), z_dir=(0.7071067812, 0.7071067812, 0))):
        with BuildLine():
            ThreePointArc((2, 17.9605122421), (0.5857864376, 17.3747258045), (0, 15.9605122421))
            Line((0, 15.9605122421), (0, 17.9605122421))
            Line((0, 17.9605122421), (2, 17.9605122421))
        make_face()
    extrude(amount=F2_T151_DEPTH)

    split(bisect_by=Plane.XZ.offset(25.4), keep=Keep.BOTTOM)


with BuildPart() as f2_tool153:
    # F2_s154 → F2_t155 (new body)
    with BuildSketch(Plane.YZ.offset(-5)):
        with BuildLine():
            ThreePointArc((-25.4, 2), (-24.8142135624, 0.5857864376), (-23.4, 0))
            Line((-23.4, 0), (-25.4, 0))
            Line((-25.4, 0), (-25.4, 2))
        make_face()
    extrude(amount=F2_T155_DEPTH)

    split(bisect_by=Plane(origin=(12.7, -12.7, 0), x_dir=(0, 0, 1), z_dir=(-0.7071067812, 0.7071067812, 0)), keep=Keep.TOP)


with BuildPart() as f2_tool149_1:
    add(f2_tool149.part)

    # F2_t157: intersect F2_tool153
    add(f2_tool153.part, mode=Mode.INTERSECT)


with BuildPart() as f1_23:
    add(f1_22.part)

    # F2_t147: cut F2_tool149
    add(f2_tool149_1.part, mode=Mode.SUBTRACT)


with BuildPart() as f2_tool160:
    # F2_s161 → F2_t162 (new body)
    with BuildSketch(Plane(origin=(-41.6355339059, 41.6355339059, 0), x_dir=(0, 0, 1), z_dir=(0.7071067812, -0.7071067812, 0))):
        with BuildLine():
            ThreePointArc((2, 17.9605122421), (0.5857864376, 17.3747258045), (0, 15.9605122421))
            Line((0, 15.9605122421), (0, 17.9605122421))
            Line((0, 17.9605122421), (2, 17.9605122421))
        make_face()
    extrude(amount=F2_T162_DEPTH)

    split(bisect_by=Plane.YZ.offset(-25.4), keep=Keep.TOP)


with BuildPart() as f2_tool164:
    # F2_s165 → F2_t166 (new body)
    with BuildSketch(Plane.XZ.offset(-5)):
        with BuildLine():
            ThreePointArc((-25.4, 2), (-24.8142135624, 0.5857864376), (-23.4, 0))
            Line((-23.4, 0), (-25.4, 0))
            Line((-25.4, 0), (-25.4, 2))
        make_face()
    extrude(amount=F2_T166_DEPTH)

    split(bisect_by=Plane(origin=(-12.7, -12.7, 0), x_dir=(0, 0, 1), z_dir=(0.7071067812, 0.7071067812, 0)), keep=Keep.TOP)


with BuildPart() as f2_tool160_1:
    add(f2_tool160.part)

    # F2_t168: intersect F2_tool164
    add(f2_tool164.part, mode=Mode.INTERSECT)


with BuildPart() as f1_24:
    add(f1_23.part)

    # F2_t158: cut F2_tool160
    add(f2_tool160_1.part, mode=Mode.SUBTRACT)

    # F3 (on face) → F4 (cut)
    with BuildSketch(Plane.XY.offset(7)):
        with Locations((17.9949663132, -11.8113001988)):
            Circle(F3_R)
    extrude(amount=-F4_DEPTH, mode=Mode.SUBTRACT)

    # F5 (on face) → F6 (cut)
    with BuildSketch(Plane.XY.offset(7)):
        with Locations((-17.9949663132, 11.8113001988)):
            Circle(F5_R)
    extrude(amount=-F6_DEPTH, mode=Mode.SUBTRACT)

    # F7 (on face) → F8 (cut)
    with BuildSketch(Plane(origin=(0, 0, 0), x_dir=(1, 0, 0), z_dir=(0, 0, -1))):
        with Locations((-11.8113001988, 17.9949663132)):
            Circle(F7_R)
    extrude(amount=-F8_DEPTH, mode=Mode.SUBTRACT)

    # F9 (on face) → F10 (cut)
    with BuildSketch(Plane(origin=(0, 0, 0), x_dir=(1, 0, 0), z_dir=(0, 0, -1))):
        with Locations((11.8113001988, -17.9949663132)):
            Circle(F9_R)
    extrude(amount=-F10_DEPTH, mode=Mode.SUBTRACT)


solid = f1_24.part
